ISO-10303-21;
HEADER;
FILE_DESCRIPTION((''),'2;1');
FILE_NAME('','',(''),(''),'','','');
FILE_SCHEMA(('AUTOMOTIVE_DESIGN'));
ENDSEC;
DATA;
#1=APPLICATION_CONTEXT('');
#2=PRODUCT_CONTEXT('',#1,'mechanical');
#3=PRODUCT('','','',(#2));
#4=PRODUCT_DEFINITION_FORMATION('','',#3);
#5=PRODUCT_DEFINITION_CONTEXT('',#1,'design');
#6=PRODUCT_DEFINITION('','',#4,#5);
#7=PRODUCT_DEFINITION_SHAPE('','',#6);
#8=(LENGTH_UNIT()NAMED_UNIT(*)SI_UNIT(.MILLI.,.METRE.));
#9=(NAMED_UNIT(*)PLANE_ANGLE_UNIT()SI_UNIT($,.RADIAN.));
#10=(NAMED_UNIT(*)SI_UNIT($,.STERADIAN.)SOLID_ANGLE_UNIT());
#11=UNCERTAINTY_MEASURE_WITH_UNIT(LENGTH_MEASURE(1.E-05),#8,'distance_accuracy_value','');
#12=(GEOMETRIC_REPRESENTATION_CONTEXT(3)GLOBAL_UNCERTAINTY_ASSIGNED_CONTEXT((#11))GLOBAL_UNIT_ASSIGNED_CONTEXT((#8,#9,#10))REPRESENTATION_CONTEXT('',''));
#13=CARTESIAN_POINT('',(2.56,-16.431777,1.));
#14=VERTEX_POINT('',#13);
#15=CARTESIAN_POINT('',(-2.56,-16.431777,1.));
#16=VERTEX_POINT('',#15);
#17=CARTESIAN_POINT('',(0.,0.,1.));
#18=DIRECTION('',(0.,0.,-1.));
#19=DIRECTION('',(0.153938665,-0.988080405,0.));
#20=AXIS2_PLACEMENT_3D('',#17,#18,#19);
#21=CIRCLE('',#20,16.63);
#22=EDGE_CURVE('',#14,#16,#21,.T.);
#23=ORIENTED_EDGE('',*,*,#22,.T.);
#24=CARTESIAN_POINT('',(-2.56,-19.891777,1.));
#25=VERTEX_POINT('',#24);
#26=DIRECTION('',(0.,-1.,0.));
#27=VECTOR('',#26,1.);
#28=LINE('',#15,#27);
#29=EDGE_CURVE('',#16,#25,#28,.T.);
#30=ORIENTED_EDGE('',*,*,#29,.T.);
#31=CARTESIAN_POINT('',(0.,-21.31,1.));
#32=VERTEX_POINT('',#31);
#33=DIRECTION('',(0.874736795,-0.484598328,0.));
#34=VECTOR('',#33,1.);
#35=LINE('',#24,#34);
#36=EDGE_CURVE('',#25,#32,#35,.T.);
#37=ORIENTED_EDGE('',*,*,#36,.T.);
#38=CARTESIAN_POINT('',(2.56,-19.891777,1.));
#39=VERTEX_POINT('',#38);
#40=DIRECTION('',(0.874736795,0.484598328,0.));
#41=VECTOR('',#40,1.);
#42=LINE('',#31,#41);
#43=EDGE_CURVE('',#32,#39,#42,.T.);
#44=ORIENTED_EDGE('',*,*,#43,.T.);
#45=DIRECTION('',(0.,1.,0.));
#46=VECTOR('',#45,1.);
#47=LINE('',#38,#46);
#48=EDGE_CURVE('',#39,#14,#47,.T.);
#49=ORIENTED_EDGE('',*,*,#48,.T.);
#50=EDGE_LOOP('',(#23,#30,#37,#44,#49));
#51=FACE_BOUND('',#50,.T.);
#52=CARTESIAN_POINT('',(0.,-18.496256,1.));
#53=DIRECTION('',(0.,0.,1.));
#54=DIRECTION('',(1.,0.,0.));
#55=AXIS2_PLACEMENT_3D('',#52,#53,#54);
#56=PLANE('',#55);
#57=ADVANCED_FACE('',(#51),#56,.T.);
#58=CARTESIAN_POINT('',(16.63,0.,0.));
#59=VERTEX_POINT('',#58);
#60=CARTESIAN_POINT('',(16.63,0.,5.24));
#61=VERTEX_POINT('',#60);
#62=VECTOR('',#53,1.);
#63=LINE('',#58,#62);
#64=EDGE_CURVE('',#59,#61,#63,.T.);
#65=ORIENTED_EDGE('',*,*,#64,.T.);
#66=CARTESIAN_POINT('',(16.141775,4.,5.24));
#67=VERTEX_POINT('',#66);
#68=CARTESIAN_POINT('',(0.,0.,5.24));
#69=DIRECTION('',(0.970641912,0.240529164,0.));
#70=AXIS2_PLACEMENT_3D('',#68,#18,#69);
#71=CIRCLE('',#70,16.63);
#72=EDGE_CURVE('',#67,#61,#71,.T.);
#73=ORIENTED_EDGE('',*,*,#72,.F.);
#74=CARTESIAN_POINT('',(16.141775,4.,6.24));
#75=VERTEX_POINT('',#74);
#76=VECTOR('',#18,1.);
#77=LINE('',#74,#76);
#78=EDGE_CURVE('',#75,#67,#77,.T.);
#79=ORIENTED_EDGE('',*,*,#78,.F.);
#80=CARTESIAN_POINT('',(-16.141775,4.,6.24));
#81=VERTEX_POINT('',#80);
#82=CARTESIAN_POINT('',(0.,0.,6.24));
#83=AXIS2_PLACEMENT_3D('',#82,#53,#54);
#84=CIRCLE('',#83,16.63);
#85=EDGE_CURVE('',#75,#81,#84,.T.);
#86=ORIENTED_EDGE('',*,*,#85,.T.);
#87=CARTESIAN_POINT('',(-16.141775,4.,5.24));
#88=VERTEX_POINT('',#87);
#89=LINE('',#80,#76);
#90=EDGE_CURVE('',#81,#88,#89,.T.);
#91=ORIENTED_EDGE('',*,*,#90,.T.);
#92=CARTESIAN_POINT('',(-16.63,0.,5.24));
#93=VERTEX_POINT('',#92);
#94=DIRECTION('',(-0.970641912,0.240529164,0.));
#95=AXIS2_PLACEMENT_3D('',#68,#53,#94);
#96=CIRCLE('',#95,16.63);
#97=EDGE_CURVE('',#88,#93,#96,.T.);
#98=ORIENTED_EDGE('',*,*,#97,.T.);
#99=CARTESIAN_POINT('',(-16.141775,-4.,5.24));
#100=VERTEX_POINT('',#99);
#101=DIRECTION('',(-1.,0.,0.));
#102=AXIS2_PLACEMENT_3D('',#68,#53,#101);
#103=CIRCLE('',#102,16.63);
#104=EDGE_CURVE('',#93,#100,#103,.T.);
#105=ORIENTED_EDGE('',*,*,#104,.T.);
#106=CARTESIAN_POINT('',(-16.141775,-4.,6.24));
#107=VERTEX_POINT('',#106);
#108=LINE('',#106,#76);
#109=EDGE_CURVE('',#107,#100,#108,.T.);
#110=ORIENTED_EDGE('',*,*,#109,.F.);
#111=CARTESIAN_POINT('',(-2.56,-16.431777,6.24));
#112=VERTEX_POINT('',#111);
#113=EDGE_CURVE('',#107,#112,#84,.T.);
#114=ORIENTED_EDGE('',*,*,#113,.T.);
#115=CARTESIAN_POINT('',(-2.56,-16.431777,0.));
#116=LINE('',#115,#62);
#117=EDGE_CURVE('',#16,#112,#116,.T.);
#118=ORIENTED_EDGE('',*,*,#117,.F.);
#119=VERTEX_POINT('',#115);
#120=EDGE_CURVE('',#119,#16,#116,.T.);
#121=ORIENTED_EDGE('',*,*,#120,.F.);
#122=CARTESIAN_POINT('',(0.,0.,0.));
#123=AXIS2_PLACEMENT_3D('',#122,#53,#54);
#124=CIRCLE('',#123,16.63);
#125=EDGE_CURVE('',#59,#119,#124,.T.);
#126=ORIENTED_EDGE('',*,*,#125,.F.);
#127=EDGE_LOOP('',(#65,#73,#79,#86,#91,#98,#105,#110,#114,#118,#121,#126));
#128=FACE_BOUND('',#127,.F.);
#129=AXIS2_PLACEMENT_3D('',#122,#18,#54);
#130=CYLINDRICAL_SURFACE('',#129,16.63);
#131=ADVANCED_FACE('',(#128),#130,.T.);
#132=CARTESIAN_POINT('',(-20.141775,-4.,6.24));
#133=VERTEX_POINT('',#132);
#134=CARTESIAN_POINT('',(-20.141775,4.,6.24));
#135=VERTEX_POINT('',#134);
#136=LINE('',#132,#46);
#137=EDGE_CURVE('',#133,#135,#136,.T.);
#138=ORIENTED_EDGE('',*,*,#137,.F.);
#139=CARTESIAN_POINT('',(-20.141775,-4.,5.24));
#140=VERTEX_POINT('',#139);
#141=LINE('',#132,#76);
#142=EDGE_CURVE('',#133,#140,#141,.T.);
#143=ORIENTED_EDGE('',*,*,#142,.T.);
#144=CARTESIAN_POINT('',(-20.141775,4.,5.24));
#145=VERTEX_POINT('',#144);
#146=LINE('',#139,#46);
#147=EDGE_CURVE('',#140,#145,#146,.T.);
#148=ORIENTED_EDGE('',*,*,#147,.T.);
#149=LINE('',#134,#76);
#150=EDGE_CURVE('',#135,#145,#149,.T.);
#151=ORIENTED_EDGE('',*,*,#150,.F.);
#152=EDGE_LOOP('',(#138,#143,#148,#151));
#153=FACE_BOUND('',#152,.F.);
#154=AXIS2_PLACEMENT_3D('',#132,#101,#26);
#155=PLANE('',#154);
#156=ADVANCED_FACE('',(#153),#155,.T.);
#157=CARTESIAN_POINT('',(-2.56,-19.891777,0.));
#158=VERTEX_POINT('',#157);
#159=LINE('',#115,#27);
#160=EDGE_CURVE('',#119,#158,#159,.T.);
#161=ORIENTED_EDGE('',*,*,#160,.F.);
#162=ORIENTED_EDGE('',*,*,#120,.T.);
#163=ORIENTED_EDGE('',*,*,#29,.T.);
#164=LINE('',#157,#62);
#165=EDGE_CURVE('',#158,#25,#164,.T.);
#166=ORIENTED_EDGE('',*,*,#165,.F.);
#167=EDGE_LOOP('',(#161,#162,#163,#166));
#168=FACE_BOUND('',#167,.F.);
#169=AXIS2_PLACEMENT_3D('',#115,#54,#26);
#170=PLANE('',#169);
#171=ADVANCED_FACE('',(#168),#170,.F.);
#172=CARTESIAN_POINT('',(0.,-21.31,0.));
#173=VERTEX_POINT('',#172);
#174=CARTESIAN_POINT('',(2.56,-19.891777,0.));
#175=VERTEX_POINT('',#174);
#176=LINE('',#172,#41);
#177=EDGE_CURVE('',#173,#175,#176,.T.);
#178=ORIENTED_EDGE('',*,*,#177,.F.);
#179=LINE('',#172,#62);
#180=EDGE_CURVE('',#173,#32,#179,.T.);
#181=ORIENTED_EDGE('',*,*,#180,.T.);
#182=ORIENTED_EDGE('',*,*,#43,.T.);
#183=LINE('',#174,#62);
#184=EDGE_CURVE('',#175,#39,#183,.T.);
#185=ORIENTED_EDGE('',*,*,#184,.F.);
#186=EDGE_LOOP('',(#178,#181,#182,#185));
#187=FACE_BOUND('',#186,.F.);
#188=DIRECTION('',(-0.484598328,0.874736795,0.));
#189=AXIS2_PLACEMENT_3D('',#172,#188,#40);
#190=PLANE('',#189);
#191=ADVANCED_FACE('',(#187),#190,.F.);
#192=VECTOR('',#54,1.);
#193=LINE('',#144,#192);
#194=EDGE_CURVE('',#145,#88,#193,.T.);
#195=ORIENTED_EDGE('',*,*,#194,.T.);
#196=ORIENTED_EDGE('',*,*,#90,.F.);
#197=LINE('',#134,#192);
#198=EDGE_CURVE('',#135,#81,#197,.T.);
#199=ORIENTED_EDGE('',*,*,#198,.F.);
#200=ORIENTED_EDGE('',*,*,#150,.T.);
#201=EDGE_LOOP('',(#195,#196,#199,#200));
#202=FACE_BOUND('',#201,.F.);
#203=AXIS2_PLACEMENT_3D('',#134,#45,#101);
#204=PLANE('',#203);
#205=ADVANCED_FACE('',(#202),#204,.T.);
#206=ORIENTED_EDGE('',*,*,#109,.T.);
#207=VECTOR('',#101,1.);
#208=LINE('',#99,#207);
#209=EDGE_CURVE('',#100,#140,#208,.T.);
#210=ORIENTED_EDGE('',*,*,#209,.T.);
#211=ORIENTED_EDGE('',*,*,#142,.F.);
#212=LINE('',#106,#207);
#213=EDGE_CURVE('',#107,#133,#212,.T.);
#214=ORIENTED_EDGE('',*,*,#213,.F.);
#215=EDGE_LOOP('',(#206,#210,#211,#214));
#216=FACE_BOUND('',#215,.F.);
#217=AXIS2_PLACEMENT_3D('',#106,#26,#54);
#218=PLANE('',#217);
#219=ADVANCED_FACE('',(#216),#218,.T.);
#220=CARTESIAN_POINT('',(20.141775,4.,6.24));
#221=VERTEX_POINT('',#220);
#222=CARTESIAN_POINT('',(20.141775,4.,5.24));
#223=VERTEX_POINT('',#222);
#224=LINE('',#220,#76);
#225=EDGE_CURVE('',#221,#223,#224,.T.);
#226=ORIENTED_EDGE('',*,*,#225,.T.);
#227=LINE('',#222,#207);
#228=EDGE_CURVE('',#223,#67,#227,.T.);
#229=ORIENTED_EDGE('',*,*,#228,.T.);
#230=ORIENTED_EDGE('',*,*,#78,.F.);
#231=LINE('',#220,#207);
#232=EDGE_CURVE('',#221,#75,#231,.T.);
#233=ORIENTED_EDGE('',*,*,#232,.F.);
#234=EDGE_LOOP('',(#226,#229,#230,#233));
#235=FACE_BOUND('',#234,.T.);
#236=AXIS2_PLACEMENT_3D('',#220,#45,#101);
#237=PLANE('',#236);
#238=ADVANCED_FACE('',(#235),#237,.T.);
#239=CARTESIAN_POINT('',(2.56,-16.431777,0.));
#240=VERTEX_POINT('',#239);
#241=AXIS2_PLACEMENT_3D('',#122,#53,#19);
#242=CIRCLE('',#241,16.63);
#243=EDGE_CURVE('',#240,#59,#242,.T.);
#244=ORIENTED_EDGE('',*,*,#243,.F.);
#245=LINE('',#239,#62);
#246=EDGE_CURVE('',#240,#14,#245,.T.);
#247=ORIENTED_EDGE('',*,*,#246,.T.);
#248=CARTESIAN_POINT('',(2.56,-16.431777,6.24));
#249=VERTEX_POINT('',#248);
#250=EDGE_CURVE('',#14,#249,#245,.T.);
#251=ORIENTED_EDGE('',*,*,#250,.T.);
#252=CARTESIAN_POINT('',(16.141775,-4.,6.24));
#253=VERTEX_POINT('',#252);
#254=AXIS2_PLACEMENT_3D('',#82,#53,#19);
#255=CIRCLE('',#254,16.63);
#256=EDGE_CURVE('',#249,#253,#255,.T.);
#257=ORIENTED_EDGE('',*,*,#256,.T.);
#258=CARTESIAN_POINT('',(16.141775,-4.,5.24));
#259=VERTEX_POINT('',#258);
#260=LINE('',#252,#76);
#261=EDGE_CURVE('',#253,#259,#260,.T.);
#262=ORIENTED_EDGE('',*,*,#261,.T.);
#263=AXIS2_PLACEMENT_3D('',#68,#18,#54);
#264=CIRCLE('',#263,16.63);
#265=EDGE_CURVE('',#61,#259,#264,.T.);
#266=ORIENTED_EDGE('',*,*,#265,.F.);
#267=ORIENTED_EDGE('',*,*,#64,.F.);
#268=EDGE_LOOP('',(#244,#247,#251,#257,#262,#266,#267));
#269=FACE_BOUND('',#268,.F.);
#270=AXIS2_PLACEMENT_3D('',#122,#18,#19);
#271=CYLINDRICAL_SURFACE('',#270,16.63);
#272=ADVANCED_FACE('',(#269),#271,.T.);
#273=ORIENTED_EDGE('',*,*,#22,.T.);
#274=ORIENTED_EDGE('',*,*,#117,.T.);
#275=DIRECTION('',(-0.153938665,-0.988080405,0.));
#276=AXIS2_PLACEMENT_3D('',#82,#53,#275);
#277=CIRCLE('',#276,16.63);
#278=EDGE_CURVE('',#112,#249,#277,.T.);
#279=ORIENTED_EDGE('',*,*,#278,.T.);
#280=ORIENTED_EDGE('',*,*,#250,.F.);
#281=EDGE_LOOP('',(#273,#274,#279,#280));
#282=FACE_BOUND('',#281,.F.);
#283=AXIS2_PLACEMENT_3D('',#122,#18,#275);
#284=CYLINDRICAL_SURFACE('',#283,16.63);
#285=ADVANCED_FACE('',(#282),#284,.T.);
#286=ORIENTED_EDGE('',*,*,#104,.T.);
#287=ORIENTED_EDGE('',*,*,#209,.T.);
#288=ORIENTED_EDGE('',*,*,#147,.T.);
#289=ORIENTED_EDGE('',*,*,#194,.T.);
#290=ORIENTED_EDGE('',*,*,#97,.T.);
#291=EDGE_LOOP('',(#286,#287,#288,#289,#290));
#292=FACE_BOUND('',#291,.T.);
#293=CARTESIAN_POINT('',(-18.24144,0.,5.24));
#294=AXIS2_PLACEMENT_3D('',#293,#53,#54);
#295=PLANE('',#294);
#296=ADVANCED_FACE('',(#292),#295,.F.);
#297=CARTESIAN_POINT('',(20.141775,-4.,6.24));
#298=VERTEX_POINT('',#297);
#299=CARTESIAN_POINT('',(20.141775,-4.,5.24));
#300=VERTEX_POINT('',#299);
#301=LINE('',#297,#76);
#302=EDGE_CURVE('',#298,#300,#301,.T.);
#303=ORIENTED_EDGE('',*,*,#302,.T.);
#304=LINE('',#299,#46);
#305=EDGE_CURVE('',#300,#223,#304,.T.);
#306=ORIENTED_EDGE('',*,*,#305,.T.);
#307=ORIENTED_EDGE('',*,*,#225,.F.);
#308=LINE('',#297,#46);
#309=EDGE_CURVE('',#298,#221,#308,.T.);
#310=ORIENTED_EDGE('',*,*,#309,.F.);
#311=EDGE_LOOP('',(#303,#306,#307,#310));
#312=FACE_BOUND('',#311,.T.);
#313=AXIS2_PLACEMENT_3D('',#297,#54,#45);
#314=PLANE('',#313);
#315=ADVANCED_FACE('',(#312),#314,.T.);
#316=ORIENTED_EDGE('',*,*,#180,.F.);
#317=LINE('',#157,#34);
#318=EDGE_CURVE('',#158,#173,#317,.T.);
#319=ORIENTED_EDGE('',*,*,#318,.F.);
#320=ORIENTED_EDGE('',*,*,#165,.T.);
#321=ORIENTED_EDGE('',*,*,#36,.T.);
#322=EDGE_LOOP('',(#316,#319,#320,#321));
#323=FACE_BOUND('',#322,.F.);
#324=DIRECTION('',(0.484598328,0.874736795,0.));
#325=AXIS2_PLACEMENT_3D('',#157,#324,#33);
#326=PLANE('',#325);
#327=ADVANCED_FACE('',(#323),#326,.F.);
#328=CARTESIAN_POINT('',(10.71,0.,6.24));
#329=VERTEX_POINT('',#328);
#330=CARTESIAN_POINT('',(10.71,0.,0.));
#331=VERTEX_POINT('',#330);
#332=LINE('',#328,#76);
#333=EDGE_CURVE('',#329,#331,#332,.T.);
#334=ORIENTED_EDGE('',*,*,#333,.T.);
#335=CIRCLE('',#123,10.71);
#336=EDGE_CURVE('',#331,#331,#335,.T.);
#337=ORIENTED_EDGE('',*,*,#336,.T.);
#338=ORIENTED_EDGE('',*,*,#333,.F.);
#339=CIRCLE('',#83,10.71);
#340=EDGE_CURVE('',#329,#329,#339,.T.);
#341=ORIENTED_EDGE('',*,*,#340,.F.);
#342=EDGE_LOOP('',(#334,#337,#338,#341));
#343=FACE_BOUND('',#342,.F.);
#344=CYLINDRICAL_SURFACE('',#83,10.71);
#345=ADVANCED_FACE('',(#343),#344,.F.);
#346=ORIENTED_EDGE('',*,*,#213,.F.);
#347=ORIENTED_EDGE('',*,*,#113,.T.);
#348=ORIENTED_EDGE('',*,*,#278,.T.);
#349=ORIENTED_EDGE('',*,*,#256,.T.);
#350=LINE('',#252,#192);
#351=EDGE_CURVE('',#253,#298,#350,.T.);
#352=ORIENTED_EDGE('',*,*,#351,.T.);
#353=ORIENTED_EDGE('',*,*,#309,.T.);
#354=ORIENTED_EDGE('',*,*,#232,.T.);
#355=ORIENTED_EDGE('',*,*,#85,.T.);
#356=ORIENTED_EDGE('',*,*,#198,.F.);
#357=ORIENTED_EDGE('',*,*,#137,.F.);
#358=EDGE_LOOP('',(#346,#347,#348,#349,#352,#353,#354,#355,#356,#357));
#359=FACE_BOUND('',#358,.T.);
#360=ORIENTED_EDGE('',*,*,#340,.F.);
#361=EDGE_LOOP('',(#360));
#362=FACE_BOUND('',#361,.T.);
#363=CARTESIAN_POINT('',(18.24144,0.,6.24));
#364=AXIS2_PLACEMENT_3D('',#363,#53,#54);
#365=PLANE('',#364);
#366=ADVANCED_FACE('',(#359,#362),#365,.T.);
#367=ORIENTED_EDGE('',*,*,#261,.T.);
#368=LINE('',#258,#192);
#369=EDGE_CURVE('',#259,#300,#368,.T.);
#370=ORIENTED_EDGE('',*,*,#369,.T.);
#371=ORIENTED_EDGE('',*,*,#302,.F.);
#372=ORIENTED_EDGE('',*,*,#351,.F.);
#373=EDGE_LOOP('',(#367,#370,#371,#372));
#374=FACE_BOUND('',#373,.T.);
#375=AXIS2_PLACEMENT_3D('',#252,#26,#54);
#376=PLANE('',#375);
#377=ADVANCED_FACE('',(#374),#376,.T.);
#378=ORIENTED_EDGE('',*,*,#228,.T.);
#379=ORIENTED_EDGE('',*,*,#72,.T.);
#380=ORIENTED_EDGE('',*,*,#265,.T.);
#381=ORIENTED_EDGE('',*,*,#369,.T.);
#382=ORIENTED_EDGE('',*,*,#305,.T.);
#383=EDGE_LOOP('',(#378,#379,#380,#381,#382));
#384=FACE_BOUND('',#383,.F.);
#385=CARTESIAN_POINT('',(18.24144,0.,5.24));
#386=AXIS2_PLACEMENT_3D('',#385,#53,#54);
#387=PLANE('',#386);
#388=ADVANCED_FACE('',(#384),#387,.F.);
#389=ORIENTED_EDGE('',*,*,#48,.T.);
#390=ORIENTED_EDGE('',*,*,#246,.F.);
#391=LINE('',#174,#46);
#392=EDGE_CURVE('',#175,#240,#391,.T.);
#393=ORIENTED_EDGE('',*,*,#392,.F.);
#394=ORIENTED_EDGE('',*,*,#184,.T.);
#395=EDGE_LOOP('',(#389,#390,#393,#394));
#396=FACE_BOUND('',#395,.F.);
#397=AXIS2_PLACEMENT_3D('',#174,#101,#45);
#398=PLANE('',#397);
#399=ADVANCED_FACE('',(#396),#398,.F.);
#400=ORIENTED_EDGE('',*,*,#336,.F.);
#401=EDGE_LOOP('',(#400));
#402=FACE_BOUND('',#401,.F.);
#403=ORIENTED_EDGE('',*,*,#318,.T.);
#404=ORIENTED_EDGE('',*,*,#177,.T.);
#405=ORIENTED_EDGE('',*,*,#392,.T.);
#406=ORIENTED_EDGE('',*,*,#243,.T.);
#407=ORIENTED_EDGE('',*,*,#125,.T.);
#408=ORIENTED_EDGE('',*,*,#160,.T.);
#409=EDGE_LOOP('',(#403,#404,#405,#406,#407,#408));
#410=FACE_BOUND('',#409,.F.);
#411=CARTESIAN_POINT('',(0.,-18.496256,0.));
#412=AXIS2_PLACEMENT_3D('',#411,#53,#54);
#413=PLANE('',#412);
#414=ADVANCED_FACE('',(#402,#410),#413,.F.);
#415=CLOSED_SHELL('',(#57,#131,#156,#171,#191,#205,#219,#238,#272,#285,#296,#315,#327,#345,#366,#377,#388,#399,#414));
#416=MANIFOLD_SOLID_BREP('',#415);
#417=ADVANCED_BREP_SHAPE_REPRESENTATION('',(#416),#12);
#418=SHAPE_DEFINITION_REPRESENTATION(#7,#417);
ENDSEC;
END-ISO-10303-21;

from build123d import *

# Parameters (mm, degrees)
F1_DEPTH = 6.24
F2_DEPTH = 1
F3_R     = 10.71
F4_DEPTH = 6.241
F6_DEPTH = 1


# Not quite as in the source:
# - a pattern or mirror of a feature is missing from the dataset's text; its kind, count and spacing are read off the source's solid


with BuildPart() as f1:
    # F0 (on Top) → F1 (new body)
    with BuildSketch(Plane.XY):
        with BuildLine():
            ThreePointArc((2.56, -16.4317771407), (12.6318981155, -10.8162863313), (16.63, 0))
            ThreePointArc((16.63, 0), (-10.8162863313, 12.6318981155), (-2.56, -16.4317771407))
            ThreePointArc((-2.56, -16.4317771407), (0, -16.63), (2.56, -16.4317771407))
        make_face()
    extrude(amount=F1_DEPTH)

    # F0 (on Top) → F2 (join)
    with BuildSketch(Plane.XY):
        with BuildLine():
            ThreePointArc((2.56, -16.4317771407), (0, -16.63), (-2.56, -16.4317771407))
            Line((-2.56, -16.4317771407), (-2.56, -19.8917771407))
            Line((-2.56, -19.8917771407), (0, -21.31))
            Line((0, -21.31), (2.56, -19.8917771407))
            Line((2.56, -19.8917771407), (2.56, -16.4317771407))
        make_face()
    extrude(amount=F2_DEPTH)

    # F3 (on face) → F4 (cut, through all)
    with BuildSketch(Plane.XY.offset(6.24)):
        Circle(F3_R)
    extrude(amount=-F4_DEPTH, mode=Mode.SUBTRACT)

    # F5 (on face) → F6 (join)
    with BuildSketch(Plane.XY.offset(6.24)):
        with BuildLine():
            Line((20.1417749953, 4), (16.1417749953, 4))
            ThreePointArc((16.1417749953, 4), (16.5074925136, 2.0148426524), (16.63, 0))
            ThreePointArc((16.63, 0), (16.5074925136, -2.0148426524), (16.1417749953, -4))
            Line((16.1417749953, -4), (20.1417749953, -4))
            Line((20.1417749953, -4), (20.1417749953, 4))
        make_face()
    f6 = extrude(amount=-F6_DEPTH)

    # F6_copies: F6 across plane
    add(f6.mirror(Plane(origin=(0, 0, 0), x_dir=(0, 0, -1), z_dir=(-1, 0, 0))))


solid = f1.part
